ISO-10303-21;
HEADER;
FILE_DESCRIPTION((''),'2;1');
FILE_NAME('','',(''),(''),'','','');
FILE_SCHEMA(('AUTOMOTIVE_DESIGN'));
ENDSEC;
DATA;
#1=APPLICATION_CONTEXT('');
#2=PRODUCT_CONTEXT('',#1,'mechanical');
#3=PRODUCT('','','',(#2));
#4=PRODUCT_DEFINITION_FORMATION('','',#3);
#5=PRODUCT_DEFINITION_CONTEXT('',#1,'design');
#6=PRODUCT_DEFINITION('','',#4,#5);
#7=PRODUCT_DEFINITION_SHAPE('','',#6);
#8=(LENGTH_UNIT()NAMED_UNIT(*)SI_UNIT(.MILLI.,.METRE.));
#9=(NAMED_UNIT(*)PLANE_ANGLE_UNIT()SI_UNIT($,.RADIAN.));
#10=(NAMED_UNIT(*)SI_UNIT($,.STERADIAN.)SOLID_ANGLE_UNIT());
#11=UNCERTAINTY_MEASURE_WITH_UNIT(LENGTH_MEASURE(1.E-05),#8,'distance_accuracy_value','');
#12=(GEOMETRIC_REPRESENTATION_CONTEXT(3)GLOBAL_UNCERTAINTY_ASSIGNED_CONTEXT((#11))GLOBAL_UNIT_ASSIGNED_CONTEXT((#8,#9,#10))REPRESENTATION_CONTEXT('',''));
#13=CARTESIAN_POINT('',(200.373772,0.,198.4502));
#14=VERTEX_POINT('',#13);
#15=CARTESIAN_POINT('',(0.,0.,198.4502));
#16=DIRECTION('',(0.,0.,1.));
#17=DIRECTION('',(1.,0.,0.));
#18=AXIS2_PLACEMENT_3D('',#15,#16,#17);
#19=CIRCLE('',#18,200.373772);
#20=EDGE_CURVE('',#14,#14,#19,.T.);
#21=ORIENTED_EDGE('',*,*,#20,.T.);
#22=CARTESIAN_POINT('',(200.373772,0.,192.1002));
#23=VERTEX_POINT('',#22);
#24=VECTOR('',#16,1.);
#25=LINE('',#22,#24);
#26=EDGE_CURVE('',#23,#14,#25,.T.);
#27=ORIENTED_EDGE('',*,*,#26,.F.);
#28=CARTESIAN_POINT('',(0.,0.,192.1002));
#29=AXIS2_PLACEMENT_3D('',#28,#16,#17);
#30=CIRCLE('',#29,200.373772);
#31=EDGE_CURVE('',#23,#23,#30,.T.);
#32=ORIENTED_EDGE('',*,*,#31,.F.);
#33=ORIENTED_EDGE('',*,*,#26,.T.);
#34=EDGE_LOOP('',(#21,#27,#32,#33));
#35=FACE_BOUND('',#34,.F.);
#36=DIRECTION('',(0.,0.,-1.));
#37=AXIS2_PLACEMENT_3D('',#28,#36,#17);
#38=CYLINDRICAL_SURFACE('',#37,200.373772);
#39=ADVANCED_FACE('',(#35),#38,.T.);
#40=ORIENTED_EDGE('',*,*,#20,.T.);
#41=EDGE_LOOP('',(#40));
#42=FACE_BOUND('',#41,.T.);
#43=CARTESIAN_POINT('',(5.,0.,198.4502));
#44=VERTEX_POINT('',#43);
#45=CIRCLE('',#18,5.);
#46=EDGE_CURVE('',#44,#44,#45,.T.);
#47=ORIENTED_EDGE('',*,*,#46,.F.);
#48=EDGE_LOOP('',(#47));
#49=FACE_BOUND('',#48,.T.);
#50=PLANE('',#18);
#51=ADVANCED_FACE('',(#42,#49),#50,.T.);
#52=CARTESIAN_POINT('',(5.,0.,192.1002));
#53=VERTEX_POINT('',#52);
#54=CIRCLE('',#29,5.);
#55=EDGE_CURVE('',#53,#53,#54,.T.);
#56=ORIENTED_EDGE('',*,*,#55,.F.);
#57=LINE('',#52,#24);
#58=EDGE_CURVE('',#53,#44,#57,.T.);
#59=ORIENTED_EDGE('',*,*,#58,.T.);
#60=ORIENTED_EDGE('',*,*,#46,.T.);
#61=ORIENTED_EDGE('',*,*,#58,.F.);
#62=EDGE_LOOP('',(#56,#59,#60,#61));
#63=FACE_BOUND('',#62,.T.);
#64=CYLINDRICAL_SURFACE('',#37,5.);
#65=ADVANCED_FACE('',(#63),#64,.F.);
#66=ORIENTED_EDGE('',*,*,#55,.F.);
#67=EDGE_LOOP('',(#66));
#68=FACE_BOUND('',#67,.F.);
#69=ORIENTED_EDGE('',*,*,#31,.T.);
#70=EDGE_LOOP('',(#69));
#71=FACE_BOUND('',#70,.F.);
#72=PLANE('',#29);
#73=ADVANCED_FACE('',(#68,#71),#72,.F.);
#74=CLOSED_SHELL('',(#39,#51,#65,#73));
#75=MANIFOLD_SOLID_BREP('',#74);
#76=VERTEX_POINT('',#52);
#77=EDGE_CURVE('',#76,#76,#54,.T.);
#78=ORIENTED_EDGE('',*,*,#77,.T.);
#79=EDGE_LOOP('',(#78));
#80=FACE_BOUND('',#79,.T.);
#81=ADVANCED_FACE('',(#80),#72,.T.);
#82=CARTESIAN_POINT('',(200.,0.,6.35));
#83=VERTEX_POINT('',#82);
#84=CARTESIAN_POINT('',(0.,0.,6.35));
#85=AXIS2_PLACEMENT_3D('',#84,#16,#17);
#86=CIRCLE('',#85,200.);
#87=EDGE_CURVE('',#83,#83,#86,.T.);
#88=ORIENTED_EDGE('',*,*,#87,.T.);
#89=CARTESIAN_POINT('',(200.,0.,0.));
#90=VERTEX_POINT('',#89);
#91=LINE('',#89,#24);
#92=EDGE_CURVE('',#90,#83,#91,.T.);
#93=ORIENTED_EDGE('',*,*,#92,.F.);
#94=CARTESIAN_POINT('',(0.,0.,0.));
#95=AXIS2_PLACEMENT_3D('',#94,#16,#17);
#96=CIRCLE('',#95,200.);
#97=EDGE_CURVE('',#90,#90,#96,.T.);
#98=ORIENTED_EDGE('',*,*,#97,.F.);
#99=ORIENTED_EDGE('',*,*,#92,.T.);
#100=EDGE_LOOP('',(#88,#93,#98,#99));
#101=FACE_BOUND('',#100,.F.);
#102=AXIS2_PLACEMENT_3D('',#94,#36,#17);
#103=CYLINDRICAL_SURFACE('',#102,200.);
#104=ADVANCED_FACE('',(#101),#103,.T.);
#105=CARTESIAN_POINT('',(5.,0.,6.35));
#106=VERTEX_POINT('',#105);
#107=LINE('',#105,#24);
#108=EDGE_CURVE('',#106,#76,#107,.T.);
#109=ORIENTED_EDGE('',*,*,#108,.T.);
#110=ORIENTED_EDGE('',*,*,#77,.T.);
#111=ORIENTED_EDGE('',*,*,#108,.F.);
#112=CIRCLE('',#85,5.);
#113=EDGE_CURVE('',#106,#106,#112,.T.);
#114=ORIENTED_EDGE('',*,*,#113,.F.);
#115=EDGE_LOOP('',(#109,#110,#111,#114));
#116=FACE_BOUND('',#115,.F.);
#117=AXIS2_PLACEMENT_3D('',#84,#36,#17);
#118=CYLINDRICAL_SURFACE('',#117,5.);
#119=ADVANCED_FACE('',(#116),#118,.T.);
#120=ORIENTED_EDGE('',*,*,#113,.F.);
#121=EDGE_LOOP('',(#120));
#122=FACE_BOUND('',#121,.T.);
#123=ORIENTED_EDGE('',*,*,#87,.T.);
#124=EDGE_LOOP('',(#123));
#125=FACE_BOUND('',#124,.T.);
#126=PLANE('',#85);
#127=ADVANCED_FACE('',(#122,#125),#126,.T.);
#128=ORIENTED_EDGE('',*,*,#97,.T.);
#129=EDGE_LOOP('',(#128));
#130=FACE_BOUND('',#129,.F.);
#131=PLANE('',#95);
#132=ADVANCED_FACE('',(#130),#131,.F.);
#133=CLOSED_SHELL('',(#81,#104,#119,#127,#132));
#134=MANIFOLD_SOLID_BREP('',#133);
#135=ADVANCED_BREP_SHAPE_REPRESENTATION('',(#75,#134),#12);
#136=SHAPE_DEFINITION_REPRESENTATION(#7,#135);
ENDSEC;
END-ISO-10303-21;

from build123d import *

# Parameters (mm, degrees)
F0_R     = 200
F1_DEPTH = 6.35
F2_R     = 5
F3_DEPTH = 185.7502
F4_R     = 200.3737721093
F4_R_2   = 5
F5_DEPTH = 6.35


# Not quite as in the source:
# - a length typed as a fraction of an inch, garbled in the dataset ("3 / 203.2 mm" for 3/8 in), is restored


with BuildPart() as f1:
    # F0 (on Top) → F1 (new body)
    with BuildSketch(Plane.XY):
        Circle(F0_R)
    extrude(amount=F1_DEPTH)

    # F2 (on face) → F3 (join)
    with BuildSketch(Plane.XY.offset(6.35)):
        Circle(F2_R)
    extrude(amount=F3_DEPTH)


with BuildPart() as f5:
    # F4 (on face) → F5 (new body)
    with BuildSketch(Plane.XY.offset(192.1002)):
        Circle(F4_R)
        Circle(F4_R_2, mode=Mode.SUBTRACT)
    extrude(amount=F5_DEPTH)


solid = Compound([f1.part, f5.part])
